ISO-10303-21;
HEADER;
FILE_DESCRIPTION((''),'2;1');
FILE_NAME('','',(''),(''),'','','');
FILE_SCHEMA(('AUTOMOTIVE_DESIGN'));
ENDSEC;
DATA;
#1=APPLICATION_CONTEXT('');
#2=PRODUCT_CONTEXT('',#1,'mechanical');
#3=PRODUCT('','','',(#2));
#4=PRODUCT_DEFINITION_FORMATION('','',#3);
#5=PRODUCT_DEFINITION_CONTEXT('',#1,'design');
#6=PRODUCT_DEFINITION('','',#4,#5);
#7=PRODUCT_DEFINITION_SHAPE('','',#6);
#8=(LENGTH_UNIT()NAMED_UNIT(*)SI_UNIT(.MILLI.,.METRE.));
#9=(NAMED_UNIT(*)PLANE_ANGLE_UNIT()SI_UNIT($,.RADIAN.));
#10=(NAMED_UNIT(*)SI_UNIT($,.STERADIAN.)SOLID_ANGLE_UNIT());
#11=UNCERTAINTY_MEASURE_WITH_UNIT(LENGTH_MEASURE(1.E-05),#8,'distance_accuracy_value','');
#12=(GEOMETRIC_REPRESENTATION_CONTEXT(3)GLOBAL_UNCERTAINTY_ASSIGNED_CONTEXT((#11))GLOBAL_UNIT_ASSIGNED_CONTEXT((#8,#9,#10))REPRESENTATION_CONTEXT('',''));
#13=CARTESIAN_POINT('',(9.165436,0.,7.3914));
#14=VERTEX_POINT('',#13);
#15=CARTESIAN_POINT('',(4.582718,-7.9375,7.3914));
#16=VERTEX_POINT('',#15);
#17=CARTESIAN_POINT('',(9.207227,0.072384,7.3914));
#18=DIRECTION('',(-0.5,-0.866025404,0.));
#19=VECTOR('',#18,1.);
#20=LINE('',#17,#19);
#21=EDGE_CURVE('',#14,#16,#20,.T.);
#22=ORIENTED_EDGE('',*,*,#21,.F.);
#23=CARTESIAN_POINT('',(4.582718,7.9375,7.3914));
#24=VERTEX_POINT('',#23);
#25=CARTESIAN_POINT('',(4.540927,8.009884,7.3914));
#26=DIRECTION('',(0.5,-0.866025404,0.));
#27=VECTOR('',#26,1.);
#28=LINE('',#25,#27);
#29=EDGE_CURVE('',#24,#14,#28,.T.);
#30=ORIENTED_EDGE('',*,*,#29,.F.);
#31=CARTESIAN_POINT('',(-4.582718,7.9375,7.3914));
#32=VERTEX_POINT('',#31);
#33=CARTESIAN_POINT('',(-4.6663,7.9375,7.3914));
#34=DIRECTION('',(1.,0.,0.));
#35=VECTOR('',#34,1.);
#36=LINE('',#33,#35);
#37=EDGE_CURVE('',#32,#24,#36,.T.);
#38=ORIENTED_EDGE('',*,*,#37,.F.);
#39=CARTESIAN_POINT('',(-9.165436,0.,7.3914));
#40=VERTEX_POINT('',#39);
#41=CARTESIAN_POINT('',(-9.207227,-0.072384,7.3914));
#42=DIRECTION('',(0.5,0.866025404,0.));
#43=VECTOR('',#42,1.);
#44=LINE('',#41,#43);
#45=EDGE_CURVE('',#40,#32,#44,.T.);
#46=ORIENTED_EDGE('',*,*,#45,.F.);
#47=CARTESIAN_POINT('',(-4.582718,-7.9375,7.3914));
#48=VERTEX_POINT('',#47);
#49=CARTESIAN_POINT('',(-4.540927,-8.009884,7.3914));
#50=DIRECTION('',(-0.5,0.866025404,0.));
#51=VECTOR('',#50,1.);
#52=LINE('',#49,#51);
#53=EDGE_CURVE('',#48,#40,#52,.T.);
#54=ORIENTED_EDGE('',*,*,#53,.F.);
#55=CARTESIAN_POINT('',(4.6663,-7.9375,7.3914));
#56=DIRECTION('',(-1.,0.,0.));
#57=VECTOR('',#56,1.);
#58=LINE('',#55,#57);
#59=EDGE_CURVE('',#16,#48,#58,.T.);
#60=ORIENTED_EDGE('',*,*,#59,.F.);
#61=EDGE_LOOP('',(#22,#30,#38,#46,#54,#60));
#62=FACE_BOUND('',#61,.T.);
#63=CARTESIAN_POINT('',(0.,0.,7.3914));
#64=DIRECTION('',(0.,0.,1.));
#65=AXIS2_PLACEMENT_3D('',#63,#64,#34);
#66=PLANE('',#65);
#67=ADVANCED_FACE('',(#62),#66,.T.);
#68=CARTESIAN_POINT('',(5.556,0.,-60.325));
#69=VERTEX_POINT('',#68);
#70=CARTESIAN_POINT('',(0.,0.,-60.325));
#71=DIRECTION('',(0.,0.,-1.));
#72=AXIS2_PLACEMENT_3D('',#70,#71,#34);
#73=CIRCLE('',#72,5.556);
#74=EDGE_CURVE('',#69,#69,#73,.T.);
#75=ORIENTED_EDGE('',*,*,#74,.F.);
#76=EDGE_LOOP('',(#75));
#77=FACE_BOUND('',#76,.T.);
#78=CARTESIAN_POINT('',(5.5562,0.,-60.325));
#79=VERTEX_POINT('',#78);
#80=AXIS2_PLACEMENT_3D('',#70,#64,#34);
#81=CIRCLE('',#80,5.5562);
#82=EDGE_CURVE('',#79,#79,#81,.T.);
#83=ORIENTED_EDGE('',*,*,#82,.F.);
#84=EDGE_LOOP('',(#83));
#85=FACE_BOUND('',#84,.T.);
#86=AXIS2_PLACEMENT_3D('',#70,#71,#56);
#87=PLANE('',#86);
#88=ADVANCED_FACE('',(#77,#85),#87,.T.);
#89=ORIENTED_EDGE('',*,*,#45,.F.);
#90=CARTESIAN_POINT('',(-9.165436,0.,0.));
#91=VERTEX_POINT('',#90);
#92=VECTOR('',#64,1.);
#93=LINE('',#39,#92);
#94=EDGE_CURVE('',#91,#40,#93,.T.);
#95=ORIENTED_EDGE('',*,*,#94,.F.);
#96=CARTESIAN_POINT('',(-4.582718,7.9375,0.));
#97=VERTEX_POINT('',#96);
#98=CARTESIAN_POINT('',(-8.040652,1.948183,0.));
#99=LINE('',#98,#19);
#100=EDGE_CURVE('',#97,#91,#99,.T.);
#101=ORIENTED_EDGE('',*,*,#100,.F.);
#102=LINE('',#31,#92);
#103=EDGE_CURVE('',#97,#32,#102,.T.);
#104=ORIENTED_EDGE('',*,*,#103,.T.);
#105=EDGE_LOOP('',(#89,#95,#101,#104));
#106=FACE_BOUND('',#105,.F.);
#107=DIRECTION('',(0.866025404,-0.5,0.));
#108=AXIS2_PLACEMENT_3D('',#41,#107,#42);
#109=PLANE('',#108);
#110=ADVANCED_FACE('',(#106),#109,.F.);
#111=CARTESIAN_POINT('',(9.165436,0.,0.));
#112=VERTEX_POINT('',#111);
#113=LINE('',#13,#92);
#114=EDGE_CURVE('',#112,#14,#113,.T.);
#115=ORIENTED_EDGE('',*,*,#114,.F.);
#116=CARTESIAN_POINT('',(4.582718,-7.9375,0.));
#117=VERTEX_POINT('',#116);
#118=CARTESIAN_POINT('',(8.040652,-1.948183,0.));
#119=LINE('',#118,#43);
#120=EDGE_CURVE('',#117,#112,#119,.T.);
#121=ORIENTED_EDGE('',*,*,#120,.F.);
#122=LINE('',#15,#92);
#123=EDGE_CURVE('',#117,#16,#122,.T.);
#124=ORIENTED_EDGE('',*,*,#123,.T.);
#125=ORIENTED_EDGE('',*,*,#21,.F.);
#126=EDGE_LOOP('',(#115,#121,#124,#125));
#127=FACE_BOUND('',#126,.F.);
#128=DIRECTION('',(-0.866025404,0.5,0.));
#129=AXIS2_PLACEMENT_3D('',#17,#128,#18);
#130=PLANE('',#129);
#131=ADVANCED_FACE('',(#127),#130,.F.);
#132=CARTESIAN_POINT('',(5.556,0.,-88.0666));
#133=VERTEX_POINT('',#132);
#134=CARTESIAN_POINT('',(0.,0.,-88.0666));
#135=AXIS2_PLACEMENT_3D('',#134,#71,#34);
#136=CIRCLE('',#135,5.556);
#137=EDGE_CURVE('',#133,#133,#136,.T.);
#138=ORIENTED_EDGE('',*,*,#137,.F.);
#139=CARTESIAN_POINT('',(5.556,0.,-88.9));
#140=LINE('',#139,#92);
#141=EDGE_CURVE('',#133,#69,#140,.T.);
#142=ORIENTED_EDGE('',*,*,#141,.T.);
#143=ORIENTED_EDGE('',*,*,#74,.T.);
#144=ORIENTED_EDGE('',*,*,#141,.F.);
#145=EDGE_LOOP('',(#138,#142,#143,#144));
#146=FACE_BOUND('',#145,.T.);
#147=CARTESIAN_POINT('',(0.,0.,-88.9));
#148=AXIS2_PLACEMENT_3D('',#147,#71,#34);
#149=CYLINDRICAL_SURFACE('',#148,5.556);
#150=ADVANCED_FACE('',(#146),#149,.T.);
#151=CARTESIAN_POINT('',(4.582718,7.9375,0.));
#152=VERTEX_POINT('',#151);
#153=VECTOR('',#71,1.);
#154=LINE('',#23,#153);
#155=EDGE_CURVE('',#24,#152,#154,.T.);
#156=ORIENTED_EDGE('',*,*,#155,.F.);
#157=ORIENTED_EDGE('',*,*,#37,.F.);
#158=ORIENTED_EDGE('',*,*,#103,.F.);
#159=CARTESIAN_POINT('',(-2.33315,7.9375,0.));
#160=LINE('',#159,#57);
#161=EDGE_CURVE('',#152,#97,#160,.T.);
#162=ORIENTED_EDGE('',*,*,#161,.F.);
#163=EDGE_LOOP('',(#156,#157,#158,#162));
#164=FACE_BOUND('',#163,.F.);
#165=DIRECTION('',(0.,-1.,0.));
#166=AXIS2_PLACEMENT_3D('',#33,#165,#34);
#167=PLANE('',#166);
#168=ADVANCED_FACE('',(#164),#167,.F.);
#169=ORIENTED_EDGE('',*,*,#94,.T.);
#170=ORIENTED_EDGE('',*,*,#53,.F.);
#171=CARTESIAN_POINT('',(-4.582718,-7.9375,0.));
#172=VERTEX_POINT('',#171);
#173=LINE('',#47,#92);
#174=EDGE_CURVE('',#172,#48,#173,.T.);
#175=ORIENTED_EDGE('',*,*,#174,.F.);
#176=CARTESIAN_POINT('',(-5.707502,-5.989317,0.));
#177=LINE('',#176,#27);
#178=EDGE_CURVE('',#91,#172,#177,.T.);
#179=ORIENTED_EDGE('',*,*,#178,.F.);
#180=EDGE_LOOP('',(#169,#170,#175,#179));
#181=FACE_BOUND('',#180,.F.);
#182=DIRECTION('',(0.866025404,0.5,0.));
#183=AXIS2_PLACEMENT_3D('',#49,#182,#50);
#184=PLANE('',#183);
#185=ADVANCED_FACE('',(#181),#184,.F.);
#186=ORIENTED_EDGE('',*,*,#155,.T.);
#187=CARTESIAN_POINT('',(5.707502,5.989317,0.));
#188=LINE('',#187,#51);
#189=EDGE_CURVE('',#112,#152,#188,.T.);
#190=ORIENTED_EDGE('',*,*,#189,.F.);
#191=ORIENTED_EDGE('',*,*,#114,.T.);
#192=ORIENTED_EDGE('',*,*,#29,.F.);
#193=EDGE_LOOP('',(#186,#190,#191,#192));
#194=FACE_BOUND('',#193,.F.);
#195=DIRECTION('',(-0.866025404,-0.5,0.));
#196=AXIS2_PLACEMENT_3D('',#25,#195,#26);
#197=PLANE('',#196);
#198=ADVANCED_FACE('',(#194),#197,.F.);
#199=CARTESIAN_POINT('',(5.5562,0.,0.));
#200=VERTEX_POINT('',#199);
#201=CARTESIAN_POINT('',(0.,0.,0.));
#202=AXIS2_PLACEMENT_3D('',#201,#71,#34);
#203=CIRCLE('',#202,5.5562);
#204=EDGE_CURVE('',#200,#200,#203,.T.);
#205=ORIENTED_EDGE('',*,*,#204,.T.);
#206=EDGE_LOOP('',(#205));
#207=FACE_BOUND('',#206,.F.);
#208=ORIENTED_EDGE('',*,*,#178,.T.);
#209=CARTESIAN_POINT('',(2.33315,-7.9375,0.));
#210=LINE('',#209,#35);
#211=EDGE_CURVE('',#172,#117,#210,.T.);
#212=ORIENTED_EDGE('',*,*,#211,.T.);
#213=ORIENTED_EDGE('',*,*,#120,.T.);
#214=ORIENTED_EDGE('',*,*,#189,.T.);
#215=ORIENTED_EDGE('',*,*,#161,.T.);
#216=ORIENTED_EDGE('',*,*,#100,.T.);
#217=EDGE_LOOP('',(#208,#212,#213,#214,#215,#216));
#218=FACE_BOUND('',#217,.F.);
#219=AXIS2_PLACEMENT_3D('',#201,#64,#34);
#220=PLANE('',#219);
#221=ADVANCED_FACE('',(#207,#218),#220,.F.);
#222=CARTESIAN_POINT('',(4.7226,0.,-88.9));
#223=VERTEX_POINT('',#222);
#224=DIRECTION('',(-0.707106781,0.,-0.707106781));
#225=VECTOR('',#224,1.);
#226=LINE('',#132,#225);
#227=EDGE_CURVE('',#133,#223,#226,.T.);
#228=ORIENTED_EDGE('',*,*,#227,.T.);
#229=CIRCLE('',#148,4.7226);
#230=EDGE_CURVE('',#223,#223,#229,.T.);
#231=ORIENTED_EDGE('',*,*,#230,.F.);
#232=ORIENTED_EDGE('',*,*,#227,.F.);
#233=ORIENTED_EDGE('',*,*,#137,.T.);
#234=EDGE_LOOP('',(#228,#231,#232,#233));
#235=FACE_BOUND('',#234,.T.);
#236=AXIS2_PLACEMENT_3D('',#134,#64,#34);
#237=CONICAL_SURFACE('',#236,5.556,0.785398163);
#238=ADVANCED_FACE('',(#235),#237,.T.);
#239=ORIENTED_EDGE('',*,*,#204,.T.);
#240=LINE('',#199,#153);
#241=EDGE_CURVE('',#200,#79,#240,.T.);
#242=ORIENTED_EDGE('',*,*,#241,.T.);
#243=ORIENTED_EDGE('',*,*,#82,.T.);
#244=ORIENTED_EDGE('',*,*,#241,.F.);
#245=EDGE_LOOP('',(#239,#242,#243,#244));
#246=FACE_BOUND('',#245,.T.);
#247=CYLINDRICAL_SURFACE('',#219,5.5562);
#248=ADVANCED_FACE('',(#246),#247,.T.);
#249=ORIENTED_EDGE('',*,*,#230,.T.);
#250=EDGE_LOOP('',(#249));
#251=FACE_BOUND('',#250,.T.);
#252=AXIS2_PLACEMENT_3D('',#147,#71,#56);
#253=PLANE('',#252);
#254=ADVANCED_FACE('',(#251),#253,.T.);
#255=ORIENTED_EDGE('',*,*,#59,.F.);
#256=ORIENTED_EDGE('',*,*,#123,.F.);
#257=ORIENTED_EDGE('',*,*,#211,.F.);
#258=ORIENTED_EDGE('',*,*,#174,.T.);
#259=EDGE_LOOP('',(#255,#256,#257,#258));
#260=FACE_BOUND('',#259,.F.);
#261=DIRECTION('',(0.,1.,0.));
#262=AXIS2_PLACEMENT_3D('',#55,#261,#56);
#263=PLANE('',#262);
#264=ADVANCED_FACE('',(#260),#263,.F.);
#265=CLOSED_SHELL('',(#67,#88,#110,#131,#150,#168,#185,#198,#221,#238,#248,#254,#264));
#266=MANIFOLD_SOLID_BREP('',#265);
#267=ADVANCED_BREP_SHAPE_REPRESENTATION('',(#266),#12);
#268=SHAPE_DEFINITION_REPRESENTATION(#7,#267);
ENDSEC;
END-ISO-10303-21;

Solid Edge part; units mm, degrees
sketch "Sketch1" plane through (0, 0, 0) normal (0, 0, 1) x (1, 0, 0)
  circle A0 centre (0, 0) radius 9.2075
  dimension "D1" = 18.415
extrude "Protrusion1" add sketch "Sketch1" along normal blind 7.3914
sketch "Sketch2" plane through (0, 0, 0) normal (0, 0, -1) x (1, 0, 0)
  circle A0 centre (0, 0) radius 5.5562
extrude "Protrusion2" add sketch "Sketch2" along normal blind 88.9
sketch "Sketch3" plane through (0, 0, -88.9) normal (0, 0, -1) x (1, 0, 0)
  circle A0 centre (0, 0) radius 5.556
extrude "Cutout1" cut sketch "Sketch3" against normal blind 28.575 flip side to cut
chamfer "Chamfer_1" distance 0.8334 angle 45 1 edges at (-5.556, 0, -88.9)
sketch "Sketch4" plane through (0, 0, 7.3914) normal (0, 0, 1) x (1, 0, 0)
  line L0 (-4.6663, 7.9375) -> (4.6663, 7.9375)
  dimension "D1" = 15.875
extrude "Cutout2" cut sketch "Sketch4" against normal up to next material side at (0, 7.9875, 7.3914)
pattern_circular "Pattern1" count 6 over 360 about axis through (0, 0, 7.3914) along (0, 0, 1) of "Cutout2"
properties part number "24100027"
